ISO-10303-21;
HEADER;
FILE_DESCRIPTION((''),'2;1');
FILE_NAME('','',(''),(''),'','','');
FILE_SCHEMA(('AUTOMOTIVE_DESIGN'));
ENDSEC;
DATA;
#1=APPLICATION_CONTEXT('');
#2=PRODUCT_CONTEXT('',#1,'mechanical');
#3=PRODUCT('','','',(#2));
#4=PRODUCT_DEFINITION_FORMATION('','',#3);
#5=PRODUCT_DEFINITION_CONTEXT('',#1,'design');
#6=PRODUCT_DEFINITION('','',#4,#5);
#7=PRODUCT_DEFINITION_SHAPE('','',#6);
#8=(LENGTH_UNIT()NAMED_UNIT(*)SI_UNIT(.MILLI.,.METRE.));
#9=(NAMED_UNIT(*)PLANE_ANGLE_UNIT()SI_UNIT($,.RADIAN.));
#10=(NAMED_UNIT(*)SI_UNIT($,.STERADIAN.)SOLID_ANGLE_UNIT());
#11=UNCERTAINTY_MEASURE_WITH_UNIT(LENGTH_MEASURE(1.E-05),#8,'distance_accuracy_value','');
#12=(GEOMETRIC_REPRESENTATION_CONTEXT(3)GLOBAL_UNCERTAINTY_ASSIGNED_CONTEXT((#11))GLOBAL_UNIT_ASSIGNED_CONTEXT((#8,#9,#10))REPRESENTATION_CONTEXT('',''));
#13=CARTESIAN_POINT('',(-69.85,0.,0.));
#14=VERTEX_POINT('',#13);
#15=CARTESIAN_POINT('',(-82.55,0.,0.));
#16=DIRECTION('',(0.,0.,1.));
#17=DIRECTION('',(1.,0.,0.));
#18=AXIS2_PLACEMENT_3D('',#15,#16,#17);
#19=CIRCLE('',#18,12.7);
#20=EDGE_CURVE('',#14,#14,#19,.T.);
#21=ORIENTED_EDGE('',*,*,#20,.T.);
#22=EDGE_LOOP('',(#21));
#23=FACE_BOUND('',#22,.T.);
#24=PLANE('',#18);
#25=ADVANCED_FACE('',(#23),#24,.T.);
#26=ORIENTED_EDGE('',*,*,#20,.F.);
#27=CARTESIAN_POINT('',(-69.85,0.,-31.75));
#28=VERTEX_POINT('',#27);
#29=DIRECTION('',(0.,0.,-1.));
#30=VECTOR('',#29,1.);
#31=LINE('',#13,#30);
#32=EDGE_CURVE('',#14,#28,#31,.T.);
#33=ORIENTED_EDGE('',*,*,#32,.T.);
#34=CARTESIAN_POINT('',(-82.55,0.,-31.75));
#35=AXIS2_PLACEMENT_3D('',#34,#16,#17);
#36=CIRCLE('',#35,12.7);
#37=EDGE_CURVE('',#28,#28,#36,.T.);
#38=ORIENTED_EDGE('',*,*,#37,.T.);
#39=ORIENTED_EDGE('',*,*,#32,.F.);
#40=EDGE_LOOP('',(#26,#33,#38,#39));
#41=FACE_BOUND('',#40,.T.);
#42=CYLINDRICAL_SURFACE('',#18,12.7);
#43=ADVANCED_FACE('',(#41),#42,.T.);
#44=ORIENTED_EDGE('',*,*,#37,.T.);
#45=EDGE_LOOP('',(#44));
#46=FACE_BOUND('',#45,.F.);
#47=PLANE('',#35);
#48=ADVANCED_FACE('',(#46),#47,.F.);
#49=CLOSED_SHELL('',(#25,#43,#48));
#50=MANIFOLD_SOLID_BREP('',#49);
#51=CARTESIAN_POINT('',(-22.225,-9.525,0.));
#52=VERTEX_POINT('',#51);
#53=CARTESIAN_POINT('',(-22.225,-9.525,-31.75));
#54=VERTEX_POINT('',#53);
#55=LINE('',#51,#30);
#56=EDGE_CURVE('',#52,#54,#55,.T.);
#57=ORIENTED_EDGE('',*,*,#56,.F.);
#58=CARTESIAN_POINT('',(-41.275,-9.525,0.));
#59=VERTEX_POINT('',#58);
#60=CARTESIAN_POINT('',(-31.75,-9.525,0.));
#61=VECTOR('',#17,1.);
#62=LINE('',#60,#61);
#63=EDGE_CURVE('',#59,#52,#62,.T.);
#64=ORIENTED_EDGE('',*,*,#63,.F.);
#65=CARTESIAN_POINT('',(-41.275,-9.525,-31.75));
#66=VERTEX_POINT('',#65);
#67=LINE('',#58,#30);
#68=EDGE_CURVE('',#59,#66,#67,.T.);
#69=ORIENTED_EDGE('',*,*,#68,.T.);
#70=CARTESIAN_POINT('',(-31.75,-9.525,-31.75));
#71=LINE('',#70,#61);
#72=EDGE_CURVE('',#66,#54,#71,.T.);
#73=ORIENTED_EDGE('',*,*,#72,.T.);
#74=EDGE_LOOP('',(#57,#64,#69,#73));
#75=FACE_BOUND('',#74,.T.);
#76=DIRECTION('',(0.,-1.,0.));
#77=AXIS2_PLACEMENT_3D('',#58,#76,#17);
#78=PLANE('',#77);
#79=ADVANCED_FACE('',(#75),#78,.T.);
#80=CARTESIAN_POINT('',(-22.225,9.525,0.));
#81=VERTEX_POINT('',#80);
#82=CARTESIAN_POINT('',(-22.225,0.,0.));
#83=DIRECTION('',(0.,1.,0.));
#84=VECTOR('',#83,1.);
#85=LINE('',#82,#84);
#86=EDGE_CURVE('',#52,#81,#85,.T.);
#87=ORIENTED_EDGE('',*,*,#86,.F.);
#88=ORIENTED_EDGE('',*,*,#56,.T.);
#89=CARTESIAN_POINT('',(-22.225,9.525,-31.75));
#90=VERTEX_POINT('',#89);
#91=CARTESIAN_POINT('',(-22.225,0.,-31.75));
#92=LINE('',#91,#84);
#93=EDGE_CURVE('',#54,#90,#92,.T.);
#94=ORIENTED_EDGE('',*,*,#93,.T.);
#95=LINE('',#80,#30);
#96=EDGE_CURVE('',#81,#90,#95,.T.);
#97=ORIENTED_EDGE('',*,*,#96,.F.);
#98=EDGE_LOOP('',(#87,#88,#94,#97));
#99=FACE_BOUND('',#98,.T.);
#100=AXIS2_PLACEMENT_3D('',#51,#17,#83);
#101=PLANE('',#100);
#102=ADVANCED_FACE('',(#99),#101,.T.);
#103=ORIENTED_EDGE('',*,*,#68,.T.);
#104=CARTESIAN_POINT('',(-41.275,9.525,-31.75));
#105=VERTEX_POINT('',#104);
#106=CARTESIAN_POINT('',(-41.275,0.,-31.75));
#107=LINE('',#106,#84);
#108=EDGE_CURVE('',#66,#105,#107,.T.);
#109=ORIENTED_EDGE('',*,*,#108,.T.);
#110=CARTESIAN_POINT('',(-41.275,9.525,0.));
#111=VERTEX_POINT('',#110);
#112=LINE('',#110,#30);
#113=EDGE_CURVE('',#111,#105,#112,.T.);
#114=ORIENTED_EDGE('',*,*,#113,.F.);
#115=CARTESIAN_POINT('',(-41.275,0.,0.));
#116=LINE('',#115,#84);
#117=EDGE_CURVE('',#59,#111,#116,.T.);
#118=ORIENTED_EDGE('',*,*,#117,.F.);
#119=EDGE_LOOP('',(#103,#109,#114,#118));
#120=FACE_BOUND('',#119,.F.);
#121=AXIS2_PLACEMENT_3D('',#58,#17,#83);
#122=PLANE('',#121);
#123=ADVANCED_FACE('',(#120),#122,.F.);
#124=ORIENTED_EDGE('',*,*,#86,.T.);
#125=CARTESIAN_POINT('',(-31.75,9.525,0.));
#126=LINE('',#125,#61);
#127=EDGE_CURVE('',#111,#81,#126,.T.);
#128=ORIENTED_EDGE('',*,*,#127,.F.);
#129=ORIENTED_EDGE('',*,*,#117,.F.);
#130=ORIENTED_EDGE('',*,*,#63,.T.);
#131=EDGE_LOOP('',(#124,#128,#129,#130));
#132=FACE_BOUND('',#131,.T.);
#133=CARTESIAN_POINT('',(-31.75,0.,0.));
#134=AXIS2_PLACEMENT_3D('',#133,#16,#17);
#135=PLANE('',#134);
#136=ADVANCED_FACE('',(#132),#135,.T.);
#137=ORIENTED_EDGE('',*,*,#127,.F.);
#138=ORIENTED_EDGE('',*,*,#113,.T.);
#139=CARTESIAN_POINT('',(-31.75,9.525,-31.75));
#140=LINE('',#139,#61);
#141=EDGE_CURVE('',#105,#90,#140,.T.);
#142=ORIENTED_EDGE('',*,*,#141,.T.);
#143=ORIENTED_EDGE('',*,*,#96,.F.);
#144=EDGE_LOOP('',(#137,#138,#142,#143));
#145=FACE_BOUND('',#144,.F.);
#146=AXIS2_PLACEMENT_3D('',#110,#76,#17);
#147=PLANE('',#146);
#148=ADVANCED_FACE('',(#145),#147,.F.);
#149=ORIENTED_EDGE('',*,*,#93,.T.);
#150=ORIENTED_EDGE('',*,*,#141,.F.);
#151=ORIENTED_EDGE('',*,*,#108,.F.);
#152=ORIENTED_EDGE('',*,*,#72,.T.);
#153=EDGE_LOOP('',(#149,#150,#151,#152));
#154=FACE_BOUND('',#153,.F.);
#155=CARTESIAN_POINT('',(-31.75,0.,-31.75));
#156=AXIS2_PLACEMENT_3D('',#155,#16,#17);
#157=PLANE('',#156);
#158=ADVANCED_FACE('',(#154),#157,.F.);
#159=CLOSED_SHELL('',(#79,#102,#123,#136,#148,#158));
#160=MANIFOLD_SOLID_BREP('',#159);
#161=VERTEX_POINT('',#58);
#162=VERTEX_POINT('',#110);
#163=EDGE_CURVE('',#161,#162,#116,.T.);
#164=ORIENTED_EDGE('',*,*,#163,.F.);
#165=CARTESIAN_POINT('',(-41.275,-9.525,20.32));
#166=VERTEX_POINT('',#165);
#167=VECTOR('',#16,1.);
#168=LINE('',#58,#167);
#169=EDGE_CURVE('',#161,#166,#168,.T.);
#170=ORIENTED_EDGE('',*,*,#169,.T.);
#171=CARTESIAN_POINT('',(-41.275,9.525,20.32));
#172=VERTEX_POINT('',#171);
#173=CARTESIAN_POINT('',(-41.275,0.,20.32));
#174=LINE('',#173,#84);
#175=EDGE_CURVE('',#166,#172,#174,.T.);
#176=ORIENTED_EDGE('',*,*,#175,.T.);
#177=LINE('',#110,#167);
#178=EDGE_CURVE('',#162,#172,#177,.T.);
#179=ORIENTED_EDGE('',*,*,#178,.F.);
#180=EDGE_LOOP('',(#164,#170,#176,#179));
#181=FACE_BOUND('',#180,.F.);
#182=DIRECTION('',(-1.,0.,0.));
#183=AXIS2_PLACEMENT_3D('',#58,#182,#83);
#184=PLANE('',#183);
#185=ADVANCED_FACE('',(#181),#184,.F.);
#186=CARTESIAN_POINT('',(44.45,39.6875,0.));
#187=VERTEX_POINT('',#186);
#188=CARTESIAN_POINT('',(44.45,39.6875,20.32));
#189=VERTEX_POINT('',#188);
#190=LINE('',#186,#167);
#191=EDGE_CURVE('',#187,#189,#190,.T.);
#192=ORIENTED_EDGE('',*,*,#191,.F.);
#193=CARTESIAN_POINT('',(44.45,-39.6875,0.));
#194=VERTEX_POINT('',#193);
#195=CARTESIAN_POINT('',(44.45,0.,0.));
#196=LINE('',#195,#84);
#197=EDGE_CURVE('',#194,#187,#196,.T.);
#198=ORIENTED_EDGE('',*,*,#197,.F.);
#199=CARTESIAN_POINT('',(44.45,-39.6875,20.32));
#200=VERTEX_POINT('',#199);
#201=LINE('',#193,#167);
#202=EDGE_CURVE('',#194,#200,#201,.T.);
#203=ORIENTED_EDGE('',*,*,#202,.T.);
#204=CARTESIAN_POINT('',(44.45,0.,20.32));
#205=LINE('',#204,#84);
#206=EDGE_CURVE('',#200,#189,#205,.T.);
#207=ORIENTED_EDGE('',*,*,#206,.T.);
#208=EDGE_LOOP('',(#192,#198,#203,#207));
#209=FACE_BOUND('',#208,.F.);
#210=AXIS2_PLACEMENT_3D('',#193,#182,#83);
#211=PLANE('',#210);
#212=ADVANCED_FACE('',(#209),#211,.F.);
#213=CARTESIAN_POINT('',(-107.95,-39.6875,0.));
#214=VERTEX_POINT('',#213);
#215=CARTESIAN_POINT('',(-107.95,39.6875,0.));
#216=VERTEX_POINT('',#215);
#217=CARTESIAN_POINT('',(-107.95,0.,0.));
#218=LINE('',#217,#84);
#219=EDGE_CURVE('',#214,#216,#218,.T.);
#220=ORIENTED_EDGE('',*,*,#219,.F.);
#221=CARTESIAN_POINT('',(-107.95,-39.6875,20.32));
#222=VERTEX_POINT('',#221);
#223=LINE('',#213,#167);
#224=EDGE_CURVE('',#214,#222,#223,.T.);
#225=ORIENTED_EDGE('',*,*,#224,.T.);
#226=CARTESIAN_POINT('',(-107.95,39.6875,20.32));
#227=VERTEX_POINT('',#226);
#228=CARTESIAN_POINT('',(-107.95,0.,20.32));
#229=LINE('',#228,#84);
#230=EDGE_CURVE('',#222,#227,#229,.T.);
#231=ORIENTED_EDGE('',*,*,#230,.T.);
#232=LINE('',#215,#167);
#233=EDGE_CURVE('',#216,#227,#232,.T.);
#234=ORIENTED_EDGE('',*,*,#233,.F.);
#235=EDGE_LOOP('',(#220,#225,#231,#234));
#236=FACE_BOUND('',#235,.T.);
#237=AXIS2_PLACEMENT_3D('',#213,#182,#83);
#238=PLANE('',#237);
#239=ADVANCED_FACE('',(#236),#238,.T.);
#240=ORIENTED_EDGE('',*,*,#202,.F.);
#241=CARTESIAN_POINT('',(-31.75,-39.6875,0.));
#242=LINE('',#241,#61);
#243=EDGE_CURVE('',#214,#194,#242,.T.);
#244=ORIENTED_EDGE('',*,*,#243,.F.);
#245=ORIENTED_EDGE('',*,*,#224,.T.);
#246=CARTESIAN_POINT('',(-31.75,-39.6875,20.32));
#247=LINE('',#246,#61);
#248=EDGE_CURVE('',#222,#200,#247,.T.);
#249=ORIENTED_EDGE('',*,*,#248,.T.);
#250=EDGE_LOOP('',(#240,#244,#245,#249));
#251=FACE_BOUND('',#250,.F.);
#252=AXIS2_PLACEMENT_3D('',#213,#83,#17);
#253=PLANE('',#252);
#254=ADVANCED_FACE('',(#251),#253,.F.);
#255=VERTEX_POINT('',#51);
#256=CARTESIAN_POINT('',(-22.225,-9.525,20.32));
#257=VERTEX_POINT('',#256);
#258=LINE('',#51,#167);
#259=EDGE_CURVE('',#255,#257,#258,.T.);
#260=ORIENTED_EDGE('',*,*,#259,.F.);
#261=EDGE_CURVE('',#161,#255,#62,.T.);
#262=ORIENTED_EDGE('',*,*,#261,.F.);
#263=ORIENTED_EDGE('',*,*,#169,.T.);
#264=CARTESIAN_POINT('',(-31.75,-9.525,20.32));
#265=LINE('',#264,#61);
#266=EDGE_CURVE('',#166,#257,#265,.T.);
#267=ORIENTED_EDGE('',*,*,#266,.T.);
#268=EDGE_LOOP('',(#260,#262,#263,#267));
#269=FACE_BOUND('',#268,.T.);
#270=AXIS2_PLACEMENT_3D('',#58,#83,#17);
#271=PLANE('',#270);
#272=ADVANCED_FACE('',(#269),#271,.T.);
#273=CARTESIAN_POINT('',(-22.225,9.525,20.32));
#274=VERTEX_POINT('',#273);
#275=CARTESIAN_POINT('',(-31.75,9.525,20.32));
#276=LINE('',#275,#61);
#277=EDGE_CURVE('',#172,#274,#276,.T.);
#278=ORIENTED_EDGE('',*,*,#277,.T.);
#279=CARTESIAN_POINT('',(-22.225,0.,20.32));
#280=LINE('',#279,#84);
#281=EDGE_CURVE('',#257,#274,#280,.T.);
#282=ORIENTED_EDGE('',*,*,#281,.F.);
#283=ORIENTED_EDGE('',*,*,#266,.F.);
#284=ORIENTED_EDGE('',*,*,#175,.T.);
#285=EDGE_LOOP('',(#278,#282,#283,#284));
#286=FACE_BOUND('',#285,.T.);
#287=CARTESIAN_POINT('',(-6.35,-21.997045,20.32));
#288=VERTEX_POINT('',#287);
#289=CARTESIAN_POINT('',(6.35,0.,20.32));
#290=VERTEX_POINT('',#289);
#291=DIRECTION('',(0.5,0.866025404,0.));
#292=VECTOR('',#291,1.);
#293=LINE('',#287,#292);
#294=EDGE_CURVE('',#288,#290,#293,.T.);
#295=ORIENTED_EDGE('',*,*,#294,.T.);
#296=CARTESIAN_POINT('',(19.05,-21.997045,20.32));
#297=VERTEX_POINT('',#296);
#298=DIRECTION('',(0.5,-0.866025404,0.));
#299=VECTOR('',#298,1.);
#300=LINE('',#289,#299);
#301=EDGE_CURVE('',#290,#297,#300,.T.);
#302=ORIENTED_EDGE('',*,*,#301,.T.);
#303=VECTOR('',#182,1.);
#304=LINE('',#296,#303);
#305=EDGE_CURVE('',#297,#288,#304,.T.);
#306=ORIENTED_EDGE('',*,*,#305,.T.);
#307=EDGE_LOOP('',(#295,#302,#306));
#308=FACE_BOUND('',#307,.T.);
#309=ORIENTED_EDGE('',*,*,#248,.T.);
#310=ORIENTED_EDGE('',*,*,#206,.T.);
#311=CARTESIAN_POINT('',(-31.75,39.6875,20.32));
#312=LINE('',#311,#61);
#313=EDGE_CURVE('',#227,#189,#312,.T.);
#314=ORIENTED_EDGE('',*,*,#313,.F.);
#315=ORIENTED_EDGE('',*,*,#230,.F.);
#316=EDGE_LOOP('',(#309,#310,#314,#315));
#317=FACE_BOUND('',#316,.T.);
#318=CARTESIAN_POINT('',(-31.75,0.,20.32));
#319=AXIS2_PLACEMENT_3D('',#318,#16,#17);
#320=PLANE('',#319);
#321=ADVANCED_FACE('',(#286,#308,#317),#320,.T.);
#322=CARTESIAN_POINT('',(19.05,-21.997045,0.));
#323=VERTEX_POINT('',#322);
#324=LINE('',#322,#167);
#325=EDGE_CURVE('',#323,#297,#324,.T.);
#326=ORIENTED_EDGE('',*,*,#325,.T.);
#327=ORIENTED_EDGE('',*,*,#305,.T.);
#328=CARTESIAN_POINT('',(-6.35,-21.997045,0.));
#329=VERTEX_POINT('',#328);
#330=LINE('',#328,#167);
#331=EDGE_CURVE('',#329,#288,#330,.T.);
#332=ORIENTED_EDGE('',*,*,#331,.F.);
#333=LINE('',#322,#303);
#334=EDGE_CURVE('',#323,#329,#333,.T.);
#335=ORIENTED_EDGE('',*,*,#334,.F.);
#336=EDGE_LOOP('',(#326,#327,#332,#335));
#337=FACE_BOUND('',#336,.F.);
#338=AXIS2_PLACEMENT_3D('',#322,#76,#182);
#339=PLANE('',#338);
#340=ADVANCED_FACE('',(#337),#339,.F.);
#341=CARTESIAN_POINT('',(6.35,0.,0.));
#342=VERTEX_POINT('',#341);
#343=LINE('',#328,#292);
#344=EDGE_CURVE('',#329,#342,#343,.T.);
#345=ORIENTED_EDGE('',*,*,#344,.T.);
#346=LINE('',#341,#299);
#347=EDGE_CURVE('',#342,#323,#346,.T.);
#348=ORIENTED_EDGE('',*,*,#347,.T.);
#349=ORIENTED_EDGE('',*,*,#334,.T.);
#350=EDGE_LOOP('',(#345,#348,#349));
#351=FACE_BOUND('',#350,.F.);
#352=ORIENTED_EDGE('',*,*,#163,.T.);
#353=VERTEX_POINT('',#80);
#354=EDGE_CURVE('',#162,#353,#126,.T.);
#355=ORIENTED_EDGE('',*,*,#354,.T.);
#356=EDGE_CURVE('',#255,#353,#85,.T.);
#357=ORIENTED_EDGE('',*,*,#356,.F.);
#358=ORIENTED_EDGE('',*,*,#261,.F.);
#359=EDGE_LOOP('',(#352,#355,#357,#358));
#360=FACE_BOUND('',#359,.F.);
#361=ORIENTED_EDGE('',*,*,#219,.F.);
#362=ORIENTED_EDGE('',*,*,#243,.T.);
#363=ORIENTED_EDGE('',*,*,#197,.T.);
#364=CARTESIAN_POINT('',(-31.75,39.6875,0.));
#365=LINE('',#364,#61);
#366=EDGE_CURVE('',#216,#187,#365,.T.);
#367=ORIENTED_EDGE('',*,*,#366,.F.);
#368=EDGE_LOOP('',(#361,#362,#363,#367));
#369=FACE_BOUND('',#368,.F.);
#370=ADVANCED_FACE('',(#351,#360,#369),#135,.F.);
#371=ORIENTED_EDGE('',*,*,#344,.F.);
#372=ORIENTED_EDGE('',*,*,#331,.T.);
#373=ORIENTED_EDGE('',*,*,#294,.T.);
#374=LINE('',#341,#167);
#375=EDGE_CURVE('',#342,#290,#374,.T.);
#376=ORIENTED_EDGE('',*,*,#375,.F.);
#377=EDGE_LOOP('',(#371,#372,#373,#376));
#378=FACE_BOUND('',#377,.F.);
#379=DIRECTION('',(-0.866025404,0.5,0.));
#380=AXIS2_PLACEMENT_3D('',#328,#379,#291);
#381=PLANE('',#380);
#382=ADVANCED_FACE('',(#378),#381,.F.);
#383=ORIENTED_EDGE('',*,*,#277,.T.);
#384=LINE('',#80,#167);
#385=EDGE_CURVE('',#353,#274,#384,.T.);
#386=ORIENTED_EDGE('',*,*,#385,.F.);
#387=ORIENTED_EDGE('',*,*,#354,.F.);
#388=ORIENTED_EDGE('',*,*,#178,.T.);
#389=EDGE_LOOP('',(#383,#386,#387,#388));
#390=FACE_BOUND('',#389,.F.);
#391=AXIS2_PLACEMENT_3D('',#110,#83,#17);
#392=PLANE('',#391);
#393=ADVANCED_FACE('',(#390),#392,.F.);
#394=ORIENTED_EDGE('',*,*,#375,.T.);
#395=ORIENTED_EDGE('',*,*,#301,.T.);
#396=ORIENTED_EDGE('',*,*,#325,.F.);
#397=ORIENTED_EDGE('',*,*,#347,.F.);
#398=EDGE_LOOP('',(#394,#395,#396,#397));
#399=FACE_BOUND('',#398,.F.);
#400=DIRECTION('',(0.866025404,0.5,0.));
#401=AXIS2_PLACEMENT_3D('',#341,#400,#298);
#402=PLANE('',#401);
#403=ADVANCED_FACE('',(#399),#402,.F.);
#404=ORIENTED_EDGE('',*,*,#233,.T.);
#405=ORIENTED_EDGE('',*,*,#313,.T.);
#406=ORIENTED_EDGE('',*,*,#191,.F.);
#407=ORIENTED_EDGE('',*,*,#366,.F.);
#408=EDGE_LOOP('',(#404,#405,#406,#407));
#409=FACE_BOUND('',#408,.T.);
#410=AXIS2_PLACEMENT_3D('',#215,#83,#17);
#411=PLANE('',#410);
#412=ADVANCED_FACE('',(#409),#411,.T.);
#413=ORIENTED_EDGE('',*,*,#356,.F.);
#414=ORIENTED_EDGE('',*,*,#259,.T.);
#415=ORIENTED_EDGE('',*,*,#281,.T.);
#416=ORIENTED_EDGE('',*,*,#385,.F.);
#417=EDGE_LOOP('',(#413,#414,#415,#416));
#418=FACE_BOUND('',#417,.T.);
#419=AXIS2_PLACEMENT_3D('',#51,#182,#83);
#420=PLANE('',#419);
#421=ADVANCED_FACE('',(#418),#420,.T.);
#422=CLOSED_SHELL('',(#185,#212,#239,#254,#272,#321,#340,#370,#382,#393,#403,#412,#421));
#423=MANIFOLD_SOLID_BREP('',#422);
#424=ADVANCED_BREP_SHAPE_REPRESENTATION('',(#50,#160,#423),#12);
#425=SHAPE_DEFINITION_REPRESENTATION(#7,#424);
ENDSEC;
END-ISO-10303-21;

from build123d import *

# Parameters (mm, degrees)
F0_W     = 152.4
F0_H     = 79.375
F0_R     = 12.7
F0_W_2   = 19.05
F0_H_2   = 19.05
F1_DEPTH = 20.32
F2_DEPTH = 31.75
F3_DEPTH = 31.75


# Not quite as in the source:
# - a feature names something its author has since deleted; it is built from what else it names


with BuildPart() as f1:
    # F0 (on Top) → F1 (new body)
    with BuildSketch(Plane.XY):
        with Locations((-31.75, 0)):
            Rectangle(F0_W, F0_H)
        Polygon((-6.35, -21.9970452561), (6.35, 0), (19.05, -21.9970452561), align=None, mode=Mode.SUBTRACT)
        with Locations((-82.55, 0)):
            Circle(F0_R, mode=Mode.SUBTRACT)
        with Locations((-31.75, 0)):
            Rectangle(F0_W_2, F0_H_2, mode=Mode.SUBTRACT)
        with Locations((-82.55, 0)):
            Circle(F0_R)
    extrude(amount=F1_DEPTH)


with BuildPart() as f2:
    # F0 (on Top) → F2 (new body)
    with BuildSketch(Plane.XY):
        with Locations((-82.55, 0)):
            Circle(F0_R)
    extrude(amount=-F2_DEPTH)


with BuildPart() as f3:
    # F0 (on Top) → F3 (new body)
    with BuildSketch(Plane.XY):
        with Locations((-31.75, 0)):
            Rectangle(F0_W_2, F0_H_2)
    extrude(amount=-F3_DEPTH)


solid = Compound([f1.part, f2.part, f3.part])
